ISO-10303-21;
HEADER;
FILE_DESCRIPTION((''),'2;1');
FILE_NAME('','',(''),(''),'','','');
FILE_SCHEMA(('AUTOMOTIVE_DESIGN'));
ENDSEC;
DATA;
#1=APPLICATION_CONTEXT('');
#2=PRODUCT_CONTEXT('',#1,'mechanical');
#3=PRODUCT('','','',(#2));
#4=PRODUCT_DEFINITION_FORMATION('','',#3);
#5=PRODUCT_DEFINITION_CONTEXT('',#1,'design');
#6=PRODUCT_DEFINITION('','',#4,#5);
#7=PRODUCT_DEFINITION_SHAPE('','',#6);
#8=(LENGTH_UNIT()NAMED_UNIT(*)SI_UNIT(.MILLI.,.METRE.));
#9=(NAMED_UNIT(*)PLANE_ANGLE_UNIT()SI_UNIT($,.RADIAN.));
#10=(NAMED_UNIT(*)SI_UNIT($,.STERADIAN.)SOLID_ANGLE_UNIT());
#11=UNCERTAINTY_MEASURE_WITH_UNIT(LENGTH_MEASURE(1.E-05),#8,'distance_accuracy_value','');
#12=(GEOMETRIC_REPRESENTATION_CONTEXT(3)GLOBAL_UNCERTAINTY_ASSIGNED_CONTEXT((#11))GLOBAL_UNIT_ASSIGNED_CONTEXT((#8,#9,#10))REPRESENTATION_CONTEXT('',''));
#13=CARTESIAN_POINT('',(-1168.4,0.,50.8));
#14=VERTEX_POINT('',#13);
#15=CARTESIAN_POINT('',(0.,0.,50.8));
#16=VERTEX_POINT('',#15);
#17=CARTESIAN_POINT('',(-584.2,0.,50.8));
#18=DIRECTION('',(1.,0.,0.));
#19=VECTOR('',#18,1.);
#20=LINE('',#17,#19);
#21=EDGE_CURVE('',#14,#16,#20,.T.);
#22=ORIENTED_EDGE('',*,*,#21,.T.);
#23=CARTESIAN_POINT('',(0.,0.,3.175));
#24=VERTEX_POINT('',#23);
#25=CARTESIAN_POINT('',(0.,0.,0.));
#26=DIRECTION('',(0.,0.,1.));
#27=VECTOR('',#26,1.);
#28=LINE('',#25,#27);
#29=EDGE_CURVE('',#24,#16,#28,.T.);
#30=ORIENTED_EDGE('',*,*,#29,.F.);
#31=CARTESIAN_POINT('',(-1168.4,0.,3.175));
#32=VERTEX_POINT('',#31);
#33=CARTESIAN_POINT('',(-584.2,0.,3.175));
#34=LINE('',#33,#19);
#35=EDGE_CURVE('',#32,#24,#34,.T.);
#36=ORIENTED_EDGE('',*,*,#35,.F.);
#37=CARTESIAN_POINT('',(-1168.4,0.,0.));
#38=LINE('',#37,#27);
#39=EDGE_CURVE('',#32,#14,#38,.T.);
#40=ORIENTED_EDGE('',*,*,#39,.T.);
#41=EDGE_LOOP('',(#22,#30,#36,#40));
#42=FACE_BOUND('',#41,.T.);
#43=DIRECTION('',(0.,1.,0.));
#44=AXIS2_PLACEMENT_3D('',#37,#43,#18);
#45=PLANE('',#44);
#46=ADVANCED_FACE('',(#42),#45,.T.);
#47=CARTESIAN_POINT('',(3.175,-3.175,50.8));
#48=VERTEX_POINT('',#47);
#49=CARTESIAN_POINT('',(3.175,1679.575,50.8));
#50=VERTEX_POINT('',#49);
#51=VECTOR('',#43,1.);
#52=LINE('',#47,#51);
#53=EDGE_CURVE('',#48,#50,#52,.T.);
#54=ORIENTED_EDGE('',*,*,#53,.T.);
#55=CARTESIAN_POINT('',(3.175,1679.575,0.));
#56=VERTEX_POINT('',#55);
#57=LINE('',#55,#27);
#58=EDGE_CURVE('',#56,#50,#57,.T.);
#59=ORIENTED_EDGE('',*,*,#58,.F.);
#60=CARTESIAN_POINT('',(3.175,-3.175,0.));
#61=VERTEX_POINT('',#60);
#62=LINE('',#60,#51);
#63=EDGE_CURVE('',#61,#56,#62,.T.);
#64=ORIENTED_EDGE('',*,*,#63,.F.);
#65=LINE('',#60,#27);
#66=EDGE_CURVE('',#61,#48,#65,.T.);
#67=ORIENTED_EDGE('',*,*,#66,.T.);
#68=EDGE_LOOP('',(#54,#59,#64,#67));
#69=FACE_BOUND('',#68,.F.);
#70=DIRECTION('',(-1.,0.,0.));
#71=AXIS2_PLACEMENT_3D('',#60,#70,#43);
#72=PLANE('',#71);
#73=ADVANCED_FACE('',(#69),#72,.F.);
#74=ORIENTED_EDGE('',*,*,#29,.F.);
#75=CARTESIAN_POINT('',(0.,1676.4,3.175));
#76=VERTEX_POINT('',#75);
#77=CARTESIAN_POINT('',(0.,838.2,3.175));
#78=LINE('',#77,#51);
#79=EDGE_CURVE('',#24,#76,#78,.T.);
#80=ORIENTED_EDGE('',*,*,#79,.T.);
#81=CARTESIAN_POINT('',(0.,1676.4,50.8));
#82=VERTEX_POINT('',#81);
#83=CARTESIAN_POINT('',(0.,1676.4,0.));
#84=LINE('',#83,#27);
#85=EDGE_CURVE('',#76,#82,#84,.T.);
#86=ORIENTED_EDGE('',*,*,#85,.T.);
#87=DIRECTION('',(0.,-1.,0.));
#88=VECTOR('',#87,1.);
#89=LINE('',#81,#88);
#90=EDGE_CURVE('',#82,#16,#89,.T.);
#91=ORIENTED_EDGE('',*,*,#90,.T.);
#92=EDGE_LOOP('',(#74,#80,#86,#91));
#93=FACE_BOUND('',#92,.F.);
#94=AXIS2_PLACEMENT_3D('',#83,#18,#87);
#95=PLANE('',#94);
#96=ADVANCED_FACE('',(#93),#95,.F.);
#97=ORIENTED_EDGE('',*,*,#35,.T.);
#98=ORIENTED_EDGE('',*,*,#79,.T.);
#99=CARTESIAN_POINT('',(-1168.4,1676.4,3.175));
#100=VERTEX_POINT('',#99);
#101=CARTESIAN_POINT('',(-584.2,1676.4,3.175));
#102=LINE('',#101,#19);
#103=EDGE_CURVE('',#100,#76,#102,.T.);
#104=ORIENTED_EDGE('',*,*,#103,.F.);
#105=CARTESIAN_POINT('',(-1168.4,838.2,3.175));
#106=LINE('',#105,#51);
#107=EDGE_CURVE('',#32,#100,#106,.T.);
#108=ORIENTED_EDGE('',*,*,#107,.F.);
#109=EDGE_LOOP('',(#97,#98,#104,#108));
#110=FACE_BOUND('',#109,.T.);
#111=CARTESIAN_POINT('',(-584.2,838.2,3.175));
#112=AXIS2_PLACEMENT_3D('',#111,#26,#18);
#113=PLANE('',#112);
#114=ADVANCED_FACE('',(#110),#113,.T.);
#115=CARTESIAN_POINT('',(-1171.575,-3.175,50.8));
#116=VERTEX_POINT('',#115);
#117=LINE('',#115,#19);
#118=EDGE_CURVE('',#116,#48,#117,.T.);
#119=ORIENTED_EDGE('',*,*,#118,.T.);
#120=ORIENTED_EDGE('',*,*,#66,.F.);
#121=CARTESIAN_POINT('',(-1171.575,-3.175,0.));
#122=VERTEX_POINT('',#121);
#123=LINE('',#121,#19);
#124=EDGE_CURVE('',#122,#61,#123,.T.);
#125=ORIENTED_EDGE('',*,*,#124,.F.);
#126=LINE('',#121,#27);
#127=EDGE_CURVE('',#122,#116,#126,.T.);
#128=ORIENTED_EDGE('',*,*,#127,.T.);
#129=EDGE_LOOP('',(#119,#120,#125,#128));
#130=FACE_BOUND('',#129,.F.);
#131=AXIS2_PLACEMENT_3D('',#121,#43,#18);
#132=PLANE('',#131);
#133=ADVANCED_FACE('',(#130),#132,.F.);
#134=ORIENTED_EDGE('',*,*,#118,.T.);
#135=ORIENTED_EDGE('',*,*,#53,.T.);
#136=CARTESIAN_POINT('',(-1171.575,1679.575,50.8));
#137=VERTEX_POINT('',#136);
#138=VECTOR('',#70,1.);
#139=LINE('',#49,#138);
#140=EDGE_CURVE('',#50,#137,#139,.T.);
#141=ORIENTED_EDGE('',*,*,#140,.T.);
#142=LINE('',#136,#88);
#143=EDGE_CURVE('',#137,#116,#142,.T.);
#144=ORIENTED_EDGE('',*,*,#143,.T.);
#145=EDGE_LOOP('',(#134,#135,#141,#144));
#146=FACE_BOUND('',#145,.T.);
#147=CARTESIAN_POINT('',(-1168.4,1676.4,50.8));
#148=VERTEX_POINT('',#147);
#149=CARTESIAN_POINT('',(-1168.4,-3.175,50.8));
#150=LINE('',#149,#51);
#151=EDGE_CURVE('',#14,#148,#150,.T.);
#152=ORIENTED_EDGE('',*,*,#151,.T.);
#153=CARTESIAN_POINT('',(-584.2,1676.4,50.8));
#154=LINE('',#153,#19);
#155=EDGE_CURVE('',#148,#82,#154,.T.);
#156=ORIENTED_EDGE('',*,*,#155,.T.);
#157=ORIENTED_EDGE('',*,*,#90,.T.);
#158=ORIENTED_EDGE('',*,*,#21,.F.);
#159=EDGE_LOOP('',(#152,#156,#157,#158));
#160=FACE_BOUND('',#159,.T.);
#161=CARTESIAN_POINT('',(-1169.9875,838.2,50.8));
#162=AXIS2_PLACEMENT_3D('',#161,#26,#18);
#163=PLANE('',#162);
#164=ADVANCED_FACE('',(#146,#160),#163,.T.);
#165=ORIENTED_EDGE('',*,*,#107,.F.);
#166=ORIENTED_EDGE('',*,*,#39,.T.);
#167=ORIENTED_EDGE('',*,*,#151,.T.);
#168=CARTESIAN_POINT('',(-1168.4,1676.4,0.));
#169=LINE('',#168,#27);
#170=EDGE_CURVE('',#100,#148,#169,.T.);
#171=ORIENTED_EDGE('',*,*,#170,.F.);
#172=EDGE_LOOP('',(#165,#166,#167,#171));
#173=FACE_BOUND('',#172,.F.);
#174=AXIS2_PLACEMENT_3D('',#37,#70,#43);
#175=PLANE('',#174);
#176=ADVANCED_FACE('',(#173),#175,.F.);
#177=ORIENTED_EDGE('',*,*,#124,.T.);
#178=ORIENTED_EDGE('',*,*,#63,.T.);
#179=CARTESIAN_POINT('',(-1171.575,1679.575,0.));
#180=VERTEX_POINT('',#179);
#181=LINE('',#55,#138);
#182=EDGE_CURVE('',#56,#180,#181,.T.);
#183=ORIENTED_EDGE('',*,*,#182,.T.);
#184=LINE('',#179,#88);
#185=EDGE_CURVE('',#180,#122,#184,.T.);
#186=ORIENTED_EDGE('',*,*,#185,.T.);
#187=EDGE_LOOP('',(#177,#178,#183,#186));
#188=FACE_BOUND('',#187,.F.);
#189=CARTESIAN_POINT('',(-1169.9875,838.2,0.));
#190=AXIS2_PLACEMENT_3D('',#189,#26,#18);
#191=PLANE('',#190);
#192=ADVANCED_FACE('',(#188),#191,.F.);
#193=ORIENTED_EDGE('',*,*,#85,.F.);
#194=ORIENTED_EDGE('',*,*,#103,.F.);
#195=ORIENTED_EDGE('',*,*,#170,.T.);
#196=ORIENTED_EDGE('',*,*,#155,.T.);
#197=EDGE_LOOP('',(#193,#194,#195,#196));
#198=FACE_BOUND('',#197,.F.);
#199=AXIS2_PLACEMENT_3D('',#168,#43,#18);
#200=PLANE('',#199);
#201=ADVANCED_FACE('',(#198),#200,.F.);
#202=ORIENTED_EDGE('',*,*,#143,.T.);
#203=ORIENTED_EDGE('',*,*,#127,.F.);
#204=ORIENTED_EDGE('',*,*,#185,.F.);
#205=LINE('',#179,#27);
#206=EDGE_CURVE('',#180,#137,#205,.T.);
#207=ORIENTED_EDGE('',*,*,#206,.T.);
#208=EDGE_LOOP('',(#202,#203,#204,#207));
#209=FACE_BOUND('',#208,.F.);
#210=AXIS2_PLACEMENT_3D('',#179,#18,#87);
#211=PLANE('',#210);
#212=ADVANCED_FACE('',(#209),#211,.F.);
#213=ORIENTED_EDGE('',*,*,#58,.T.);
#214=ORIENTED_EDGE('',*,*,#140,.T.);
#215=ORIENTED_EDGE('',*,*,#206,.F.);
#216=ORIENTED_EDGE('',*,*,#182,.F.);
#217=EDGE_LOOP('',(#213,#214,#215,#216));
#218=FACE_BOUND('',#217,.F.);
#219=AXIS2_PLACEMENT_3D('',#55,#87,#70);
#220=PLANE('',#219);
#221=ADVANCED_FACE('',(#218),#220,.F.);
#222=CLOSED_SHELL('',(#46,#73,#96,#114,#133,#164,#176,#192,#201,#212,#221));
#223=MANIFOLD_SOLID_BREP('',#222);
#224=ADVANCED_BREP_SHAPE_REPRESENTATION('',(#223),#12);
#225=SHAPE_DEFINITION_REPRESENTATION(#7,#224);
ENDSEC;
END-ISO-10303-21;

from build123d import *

# Parameters (mm, degrees)
F0_W     = 1168.4
F0_H     = 1676.4
F1_DEPTH = 3.175
F2_W     = 1168.4
F2_H     = 3.175
F3_DEPTH = 50.8


# Not quite as in the source:
# - a length typed as a fraction of an inch, garbled in the dataset ("3 / 203.2 mm" for 3/8 in), is restored


with BuildPart() as f1:
    # F0 (on Top) → F1 (new body)
    with BuildSketch(Plane.XY):
        with Locations((-584.2, 838.2)):
            Rectangle(F0_W, F0_H)
    extrude(amount=F1_DEPTH)

    # F2 (on Top) → F3 (join)
    with BuildSketch(Plane.XY):
        Polygon((-1168.4, -3.175), (-1168.4, 0), (-1168.4, 1676.4), (-1168.4, 1679.575), (-1171.575, 1679.575), (-1171.575, -3.175), align=None)
        with Locations((-584.2, 1677.9875)):
            Rectangle(F2_W, F2_H)
        Polygon((0, 1676.4), (0, 0), (0, -3.175), (3.175, -3.175), (3.175, 1679.575), (0, 1679.575), align=None)
        with Locations((-584.2, -1.5875)):
            Rectangle(F2_W, F2_H)
    extrude(amount=F3_DEPTH)


solid = f1.part
